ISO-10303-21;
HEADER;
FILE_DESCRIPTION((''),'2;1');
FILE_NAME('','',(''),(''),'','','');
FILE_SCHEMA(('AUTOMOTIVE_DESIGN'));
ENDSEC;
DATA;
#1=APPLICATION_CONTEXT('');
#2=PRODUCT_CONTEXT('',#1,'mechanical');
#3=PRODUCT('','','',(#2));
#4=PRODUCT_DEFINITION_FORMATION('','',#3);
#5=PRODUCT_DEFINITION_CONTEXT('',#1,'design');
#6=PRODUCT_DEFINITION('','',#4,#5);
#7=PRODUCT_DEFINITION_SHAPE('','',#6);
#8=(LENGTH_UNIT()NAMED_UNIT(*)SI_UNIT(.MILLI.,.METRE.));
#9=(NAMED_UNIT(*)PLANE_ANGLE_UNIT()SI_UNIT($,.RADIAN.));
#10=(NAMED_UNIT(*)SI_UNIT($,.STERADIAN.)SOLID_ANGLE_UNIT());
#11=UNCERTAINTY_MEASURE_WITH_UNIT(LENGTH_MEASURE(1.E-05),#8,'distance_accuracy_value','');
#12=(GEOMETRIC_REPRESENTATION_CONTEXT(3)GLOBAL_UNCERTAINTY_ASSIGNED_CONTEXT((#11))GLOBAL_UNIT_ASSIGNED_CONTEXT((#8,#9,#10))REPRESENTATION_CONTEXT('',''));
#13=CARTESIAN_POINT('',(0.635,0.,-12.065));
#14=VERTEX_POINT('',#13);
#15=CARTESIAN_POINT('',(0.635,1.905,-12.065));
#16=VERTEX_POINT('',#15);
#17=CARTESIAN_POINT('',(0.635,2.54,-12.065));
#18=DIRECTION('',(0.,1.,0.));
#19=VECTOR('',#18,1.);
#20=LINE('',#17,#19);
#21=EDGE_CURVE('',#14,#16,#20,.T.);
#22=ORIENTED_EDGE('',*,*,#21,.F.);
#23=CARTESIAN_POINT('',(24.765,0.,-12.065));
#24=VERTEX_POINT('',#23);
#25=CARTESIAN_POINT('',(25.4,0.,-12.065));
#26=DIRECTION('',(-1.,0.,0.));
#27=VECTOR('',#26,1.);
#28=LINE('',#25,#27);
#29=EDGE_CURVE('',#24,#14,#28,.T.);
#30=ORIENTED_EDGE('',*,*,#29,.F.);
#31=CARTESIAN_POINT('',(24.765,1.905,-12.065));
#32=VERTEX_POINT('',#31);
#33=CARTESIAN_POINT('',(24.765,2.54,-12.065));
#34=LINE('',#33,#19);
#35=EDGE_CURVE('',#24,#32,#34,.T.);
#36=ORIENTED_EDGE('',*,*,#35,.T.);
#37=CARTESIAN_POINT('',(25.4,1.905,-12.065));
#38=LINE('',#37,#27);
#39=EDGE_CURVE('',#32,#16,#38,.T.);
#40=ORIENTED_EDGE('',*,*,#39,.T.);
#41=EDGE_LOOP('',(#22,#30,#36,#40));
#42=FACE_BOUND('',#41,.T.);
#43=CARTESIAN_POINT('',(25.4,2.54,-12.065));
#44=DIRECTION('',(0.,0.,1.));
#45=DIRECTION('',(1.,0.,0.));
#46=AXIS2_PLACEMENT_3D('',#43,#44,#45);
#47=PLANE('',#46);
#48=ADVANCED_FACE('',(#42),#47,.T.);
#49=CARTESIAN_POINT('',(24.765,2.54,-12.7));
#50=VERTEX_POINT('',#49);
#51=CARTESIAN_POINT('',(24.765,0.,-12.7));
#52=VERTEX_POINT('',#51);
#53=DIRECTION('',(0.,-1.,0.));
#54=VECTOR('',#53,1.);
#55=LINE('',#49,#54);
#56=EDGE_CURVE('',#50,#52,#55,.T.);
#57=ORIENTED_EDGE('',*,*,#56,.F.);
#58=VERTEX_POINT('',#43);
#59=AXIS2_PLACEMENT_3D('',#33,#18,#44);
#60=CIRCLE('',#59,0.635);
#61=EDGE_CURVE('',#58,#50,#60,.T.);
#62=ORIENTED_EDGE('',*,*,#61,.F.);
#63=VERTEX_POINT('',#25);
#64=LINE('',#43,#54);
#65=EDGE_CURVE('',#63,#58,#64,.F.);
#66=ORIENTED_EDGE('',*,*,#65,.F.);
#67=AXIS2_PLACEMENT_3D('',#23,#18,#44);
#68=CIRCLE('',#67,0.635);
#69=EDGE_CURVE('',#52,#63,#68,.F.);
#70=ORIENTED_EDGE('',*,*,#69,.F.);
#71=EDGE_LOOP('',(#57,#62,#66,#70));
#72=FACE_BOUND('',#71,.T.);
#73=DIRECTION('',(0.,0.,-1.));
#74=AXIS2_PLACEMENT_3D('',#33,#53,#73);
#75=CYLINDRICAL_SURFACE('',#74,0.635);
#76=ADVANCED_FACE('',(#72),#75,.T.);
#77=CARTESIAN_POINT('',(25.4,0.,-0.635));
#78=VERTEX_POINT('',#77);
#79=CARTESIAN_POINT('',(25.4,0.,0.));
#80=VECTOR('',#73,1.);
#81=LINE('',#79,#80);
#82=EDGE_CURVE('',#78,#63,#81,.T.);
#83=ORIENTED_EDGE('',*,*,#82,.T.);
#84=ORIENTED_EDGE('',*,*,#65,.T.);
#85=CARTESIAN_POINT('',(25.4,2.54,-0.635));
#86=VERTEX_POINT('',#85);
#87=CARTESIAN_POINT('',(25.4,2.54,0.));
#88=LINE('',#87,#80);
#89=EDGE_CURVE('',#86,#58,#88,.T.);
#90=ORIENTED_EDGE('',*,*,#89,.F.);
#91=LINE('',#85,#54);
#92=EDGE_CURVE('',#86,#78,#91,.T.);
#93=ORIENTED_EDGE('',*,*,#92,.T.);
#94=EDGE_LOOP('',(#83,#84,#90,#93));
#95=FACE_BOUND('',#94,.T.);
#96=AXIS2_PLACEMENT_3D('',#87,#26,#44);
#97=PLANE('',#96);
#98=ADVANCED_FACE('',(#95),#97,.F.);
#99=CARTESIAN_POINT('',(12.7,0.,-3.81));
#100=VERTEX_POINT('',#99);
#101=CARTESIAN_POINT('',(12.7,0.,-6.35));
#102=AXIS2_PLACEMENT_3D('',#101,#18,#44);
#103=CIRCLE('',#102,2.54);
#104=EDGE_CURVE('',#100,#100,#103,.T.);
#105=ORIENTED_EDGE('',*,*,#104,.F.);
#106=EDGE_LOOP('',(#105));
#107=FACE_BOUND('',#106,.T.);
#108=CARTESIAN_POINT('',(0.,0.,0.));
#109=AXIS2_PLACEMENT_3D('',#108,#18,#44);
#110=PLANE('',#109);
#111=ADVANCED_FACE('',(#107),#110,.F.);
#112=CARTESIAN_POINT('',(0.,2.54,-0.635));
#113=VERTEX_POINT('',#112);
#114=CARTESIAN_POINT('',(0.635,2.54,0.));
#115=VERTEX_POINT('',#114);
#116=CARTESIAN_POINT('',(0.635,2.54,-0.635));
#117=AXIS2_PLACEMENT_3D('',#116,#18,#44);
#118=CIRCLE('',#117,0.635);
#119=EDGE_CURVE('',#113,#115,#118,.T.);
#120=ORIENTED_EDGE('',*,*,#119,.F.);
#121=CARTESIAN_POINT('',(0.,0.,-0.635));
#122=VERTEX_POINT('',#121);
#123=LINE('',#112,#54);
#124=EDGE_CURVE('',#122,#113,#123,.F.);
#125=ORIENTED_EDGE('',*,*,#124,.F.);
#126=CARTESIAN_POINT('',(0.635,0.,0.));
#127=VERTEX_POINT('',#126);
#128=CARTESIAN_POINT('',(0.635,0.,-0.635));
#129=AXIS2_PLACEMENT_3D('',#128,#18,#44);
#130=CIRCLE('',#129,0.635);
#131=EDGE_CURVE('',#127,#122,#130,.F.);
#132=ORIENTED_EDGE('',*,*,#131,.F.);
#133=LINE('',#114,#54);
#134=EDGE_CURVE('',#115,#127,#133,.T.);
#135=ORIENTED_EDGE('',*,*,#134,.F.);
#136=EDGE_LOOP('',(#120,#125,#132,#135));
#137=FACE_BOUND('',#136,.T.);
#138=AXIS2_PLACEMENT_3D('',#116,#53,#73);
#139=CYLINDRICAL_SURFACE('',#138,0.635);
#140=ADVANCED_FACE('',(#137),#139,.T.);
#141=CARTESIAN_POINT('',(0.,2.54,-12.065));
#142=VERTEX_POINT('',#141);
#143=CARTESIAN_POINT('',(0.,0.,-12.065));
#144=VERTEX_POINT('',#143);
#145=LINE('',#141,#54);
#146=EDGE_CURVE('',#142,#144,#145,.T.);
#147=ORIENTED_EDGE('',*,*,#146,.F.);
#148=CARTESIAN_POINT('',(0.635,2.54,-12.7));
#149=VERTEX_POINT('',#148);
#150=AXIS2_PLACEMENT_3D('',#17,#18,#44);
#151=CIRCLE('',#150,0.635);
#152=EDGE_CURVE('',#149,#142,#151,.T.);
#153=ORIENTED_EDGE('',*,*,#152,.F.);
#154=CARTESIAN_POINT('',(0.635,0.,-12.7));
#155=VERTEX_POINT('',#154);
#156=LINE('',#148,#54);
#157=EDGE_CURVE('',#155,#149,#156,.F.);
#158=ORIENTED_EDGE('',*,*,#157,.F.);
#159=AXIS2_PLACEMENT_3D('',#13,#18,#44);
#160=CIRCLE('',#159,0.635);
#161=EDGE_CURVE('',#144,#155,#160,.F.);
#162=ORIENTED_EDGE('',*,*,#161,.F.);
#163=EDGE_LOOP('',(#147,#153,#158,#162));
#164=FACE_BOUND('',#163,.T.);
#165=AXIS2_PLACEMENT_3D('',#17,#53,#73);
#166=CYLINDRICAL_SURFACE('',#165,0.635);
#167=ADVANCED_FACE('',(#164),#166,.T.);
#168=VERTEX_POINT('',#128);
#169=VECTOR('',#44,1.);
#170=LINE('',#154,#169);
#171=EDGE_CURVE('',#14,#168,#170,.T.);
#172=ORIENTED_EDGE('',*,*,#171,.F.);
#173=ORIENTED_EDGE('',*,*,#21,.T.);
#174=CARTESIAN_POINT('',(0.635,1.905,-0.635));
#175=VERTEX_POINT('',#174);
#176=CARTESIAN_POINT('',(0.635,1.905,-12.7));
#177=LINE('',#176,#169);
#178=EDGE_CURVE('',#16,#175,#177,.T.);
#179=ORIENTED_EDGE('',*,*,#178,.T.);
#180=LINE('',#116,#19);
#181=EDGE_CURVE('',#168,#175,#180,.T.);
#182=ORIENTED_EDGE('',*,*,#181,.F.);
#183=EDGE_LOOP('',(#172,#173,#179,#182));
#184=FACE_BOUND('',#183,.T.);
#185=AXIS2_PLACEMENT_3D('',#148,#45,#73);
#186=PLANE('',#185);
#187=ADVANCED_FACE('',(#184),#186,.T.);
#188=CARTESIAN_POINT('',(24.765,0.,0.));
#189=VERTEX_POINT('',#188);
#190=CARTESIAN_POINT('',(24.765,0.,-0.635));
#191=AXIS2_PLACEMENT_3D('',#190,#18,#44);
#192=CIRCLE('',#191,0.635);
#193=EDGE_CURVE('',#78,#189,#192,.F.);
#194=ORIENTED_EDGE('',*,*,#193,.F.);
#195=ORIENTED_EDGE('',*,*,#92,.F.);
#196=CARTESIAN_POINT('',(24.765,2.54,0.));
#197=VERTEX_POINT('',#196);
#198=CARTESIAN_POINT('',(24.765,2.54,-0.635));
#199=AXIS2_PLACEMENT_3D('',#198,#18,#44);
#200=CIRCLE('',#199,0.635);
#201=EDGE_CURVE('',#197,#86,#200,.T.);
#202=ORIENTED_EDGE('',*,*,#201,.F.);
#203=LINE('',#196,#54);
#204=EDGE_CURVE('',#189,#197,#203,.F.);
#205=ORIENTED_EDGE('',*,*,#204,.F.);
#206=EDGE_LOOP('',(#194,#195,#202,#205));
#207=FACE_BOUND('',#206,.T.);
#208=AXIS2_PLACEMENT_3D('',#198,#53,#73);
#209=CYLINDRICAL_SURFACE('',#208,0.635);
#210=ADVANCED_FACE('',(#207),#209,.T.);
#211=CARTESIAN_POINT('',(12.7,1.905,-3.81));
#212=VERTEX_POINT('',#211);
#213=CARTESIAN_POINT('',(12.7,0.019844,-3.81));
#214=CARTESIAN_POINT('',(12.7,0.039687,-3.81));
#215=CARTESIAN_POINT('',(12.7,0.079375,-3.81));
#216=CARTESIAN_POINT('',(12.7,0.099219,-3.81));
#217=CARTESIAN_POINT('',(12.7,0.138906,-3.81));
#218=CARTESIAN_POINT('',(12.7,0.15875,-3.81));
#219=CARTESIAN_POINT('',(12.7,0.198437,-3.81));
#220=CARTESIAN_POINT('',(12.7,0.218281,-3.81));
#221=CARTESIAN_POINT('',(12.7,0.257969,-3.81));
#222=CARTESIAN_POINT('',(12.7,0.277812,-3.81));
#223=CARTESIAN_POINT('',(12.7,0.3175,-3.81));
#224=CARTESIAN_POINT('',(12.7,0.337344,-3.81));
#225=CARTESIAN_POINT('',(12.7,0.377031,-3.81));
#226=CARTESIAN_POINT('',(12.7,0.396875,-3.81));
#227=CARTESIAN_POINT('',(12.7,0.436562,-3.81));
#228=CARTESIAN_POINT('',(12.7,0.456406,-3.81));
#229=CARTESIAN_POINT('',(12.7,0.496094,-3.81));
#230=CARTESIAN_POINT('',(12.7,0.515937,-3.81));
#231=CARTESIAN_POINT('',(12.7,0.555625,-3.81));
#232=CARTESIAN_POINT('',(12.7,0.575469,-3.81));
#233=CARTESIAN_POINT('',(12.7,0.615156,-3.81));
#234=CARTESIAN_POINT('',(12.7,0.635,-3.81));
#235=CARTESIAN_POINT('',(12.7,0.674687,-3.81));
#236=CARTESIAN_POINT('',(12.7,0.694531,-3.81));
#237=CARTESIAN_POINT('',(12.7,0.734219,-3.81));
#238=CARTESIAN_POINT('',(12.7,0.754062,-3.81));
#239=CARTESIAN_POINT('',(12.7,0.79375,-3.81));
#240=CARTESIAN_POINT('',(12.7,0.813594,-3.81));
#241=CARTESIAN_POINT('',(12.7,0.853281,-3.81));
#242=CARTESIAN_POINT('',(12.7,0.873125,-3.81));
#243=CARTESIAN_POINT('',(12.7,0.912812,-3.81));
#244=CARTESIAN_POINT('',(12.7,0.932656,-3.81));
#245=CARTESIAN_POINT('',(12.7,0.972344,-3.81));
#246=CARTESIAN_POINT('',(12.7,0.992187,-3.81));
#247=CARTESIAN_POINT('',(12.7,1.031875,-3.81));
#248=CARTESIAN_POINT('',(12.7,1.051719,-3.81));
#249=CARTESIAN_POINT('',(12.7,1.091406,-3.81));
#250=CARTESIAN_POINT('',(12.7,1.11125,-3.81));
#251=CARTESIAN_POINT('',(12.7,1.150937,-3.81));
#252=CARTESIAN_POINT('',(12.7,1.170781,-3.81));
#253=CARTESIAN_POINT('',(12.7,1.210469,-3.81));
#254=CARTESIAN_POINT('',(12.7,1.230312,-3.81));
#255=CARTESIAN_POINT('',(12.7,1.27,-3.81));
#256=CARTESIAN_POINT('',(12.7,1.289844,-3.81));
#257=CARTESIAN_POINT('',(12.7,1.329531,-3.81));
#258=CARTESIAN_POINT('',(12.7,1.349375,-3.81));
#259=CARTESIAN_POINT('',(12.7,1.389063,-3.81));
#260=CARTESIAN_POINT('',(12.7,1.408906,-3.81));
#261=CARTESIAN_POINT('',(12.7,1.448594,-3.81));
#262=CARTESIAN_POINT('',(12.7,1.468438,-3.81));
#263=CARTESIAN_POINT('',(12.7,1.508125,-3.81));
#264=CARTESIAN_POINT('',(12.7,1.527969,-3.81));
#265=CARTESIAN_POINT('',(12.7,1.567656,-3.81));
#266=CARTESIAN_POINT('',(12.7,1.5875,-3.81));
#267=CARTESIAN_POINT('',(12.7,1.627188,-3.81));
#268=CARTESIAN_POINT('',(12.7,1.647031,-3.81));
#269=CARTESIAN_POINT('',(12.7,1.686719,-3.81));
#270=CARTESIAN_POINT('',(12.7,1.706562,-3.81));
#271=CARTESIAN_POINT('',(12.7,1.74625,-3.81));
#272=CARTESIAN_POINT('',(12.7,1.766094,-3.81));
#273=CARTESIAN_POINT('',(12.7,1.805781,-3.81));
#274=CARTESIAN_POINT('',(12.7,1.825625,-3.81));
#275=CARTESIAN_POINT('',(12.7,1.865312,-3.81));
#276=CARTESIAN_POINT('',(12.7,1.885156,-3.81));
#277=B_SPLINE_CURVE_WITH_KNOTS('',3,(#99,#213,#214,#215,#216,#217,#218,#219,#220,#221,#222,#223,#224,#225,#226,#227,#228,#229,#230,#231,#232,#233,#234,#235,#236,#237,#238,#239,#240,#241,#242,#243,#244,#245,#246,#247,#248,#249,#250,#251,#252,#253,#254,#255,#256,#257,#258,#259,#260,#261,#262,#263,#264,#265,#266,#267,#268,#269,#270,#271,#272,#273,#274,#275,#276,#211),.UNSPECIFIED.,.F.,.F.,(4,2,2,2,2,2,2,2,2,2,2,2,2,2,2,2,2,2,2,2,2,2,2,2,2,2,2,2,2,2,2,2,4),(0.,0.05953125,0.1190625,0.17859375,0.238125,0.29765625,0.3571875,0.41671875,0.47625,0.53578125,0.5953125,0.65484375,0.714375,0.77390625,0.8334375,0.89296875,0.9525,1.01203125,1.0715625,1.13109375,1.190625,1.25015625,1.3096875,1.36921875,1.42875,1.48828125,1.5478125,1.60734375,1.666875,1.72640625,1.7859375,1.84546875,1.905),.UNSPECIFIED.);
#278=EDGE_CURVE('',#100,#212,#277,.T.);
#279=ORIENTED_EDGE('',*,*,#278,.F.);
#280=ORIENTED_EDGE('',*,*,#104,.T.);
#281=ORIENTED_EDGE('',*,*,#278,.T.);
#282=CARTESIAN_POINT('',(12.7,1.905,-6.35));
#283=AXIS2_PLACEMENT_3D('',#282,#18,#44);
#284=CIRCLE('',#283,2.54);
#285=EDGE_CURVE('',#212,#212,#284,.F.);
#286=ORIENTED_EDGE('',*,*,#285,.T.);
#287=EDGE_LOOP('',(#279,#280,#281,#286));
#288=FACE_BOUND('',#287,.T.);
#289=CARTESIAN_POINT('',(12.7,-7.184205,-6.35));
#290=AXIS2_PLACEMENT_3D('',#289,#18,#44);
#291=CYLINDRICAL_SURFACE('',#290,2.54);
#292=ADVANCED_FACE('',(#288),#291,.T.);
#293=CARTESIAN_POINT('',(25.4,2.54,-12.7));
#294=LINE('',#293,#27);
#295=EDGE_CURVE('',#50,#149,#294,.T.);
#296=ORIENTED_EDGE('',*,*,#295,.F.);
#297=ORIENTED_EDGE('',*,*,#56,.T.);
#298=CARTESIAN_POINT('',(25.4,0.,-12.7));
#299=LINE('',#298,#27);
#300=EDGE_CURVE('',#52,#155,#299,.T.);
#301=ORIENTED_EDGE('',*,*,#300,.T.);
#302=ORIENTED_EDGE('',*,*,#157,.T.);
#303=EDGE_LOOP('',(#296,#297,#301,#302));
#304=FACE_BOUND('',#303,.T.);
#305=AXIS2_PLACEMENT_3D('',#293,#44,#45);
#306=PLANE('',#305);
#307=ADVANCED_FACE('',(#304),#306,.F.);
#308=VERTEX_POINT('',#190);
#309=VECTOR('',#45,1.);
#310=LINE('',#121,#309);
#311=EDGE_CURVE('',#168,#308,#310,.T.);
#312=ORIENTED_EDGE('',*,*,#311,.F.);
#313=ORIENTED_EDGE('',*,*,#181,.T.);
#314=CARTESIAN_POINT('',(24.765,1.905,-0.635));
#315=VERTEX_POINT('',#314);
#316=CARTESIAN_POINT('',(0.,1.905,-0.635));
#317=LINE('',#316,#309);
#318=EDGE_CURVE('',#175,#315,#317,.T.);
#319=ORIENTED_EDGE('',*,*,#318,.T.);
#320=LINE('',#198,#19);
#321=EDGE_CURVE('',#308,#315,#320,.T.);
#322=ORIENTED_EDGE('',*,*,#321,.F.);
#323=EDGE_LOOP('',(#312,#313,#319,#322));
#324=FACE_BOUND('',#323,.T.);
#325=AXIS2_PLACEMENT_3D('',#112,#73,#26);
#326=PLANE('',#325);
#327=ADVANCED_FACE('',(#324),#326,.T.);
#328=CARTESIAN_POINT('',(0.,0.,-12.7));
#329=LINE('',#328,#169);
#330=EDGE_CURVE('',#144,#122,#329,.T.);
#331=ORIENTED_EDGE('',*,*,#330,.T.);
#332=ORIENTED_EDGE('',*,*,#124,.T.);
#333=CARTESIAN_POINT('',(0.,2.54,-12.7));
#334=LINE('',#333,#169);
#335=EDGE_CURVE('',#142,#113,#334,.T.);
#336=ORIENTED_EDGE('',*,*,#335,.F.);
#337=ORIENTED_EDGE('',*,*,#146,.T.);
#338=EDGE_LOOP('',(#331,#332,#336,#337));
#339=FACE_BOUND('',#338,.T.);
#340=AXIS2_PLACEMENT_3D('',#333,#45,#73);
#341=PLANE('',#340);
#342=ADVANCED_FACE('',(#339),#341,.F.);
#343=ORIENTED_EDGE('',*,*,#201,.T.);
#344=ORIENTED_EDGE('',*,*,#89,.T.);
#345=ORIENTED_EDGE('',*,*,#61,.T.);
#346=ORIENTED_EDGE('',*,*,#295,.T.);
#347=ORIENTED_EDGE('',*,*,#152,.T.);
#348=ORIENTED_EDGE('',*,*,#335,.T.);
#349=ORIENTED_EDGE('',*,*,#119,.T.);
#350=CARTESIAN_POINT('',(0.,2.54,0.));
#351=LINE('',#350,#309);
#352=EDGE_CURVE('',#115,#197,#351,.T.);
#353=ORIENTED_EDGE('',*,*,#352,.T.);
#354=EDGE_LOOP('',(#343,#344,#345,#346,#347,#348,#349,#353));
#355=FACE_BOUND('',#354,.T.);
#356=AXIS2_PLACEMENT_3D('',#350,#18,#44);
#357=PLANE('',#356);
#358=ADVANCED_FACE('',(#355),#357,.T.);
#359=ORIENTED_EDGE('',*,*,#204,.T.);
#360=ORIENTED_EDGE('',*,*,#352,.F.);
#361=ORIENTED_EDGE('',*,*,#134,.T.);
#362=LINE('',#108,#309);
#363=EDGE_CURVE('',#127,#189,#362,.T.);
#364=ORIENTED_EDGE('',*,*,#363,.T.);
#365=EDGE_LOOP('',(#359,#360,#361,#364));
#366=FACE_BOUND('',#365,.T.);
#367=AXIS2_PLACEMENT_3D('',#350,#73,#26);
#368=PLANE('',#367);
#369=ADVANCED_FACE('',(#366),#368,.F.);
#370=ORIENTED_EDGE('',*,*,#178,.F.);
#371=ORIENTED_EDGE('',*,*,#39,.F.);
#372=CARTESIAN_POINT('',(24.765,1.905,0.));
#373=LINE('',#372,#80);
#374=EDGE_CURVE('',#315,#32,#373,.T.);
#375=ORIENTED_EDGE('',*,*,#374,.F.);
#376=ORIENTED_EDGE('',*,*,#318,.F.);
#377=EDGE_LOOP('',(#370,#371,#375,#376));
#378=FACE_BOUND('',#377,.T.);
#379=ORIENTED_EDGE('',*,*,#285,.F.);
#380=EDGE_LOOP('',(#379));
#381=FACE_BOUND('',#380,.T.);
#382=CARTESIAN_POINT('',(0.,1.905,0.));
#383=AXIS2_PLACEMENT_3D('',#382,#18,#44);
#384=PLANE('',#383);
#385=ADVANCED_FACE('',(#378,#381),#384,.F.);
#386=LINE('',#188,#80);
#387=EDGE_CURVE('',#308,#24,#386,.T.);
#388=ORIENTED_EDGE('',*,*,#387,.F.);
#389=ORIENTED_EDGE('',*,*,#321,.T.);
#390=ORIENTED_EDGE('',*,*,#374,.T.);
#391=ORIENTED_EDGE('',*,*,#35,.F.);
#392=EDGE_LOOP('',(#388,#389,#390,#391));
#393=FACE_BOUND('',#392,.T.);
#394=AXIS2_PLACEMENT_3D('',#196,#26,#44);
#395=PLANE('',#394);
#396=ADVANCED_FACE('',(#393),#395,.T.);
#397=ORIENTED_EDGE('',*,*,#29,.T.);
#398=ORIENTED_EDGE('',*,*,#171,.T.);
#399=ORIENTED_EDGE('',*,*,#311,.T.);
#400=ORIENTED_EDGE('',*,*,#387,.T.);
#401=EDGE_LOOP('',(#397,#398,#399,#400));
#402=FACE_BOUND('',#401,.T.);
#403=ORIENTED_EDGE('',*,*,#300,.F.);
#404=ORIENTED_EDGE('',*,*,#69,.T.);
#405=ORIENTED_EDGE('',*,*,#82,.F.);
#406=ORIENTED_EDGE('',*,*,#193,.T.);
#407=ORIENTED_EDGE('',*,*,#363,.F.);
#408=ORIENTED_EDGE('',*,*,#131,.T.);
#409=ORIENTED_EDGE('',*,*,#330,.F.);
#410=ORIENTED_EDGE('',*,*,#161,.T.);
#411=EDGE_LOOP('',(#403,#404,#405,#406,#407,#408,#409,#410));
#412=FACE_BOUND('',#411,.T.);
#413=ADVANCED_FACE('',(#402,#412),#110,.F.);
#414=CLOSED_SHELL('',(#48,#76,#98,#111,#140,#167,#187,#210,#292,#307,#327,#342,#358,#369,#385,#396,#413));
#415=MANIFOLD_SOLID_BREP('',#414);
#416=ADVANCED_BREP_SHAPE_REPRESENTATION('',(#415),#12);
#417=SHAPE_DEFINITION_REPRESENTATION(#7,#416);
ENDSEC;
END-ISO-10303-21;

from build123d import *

# Parameters (mm, degrees)
SKETCH1_W           = 25.4
SKETCH1_H           = 12.7
BOSS_EXTRUDE1_DEPTH = 2.54
FILLET1_R           = 0.635
SHELL1_START        = 0.635
SHELL1_OUTLINE_W    = 1.905
SHELL1_OUTLINE_H    = 11.43
SHELL1_DEPTH        = 24.13
SKETCH2_R           = 2.54
BOSS_EXTRUDE2_DEPTH = 1.905


# Read off the part's stored shape, not the designer's step: Shell1
with BuildPart() as part:
    # Sketch1 → Boss-Extrude1 (new body)
    with BuildSketch(Plane(origin=(0, 0, 0), x_dir=(1, 0, 0), z_dir=(0, 1, 0))):
        with Locations((12.7, 6.35)):
            Rectangle(SKETCH1_W, SKETCH1_H)
    extrude(amount=BOSS_EXTRUDE1_DEPTH)

    # Fillet1
    fillet1_edges = [part.edges().sort_by_distance(p)[0] for p in [
        (0, 1.27, -12.7),
        (25.4, 1.27, -12.7),
        (25.4, 1.27, 0),
        (0, 1.27, 0),
    ]]
    fillet(fillet1_edges, radius=FILLET1_R)

    # Shell1 outline → Shell1 (cut)
    with BuildSketch(Plane.YZ.offset(SHELL1_START)):
        with Locations((0.9525, -6.35)):
            Rectangle(SHELL1_OUTLINE_W, SHELL1_OUTLINE_H)
    extrude(amount=SHELL1_DEPTH, mode=Mode.SUBTRACT)

    # Sketch2 → Boss-Extrude2 (add)
    with BuildSketch(Plane(origin=(0, 1.905, 0), x_dir=(-1, 0, 0), z_dir=(0, -1, 0))):
        with Locations(Location((-12.7, 6.35, 0), (0, 0, 270))):
            Circle(SKETCH2_R)
    extrude(amount=BOSS_EXTRUDE2_DEPTH)


solid = part.part
